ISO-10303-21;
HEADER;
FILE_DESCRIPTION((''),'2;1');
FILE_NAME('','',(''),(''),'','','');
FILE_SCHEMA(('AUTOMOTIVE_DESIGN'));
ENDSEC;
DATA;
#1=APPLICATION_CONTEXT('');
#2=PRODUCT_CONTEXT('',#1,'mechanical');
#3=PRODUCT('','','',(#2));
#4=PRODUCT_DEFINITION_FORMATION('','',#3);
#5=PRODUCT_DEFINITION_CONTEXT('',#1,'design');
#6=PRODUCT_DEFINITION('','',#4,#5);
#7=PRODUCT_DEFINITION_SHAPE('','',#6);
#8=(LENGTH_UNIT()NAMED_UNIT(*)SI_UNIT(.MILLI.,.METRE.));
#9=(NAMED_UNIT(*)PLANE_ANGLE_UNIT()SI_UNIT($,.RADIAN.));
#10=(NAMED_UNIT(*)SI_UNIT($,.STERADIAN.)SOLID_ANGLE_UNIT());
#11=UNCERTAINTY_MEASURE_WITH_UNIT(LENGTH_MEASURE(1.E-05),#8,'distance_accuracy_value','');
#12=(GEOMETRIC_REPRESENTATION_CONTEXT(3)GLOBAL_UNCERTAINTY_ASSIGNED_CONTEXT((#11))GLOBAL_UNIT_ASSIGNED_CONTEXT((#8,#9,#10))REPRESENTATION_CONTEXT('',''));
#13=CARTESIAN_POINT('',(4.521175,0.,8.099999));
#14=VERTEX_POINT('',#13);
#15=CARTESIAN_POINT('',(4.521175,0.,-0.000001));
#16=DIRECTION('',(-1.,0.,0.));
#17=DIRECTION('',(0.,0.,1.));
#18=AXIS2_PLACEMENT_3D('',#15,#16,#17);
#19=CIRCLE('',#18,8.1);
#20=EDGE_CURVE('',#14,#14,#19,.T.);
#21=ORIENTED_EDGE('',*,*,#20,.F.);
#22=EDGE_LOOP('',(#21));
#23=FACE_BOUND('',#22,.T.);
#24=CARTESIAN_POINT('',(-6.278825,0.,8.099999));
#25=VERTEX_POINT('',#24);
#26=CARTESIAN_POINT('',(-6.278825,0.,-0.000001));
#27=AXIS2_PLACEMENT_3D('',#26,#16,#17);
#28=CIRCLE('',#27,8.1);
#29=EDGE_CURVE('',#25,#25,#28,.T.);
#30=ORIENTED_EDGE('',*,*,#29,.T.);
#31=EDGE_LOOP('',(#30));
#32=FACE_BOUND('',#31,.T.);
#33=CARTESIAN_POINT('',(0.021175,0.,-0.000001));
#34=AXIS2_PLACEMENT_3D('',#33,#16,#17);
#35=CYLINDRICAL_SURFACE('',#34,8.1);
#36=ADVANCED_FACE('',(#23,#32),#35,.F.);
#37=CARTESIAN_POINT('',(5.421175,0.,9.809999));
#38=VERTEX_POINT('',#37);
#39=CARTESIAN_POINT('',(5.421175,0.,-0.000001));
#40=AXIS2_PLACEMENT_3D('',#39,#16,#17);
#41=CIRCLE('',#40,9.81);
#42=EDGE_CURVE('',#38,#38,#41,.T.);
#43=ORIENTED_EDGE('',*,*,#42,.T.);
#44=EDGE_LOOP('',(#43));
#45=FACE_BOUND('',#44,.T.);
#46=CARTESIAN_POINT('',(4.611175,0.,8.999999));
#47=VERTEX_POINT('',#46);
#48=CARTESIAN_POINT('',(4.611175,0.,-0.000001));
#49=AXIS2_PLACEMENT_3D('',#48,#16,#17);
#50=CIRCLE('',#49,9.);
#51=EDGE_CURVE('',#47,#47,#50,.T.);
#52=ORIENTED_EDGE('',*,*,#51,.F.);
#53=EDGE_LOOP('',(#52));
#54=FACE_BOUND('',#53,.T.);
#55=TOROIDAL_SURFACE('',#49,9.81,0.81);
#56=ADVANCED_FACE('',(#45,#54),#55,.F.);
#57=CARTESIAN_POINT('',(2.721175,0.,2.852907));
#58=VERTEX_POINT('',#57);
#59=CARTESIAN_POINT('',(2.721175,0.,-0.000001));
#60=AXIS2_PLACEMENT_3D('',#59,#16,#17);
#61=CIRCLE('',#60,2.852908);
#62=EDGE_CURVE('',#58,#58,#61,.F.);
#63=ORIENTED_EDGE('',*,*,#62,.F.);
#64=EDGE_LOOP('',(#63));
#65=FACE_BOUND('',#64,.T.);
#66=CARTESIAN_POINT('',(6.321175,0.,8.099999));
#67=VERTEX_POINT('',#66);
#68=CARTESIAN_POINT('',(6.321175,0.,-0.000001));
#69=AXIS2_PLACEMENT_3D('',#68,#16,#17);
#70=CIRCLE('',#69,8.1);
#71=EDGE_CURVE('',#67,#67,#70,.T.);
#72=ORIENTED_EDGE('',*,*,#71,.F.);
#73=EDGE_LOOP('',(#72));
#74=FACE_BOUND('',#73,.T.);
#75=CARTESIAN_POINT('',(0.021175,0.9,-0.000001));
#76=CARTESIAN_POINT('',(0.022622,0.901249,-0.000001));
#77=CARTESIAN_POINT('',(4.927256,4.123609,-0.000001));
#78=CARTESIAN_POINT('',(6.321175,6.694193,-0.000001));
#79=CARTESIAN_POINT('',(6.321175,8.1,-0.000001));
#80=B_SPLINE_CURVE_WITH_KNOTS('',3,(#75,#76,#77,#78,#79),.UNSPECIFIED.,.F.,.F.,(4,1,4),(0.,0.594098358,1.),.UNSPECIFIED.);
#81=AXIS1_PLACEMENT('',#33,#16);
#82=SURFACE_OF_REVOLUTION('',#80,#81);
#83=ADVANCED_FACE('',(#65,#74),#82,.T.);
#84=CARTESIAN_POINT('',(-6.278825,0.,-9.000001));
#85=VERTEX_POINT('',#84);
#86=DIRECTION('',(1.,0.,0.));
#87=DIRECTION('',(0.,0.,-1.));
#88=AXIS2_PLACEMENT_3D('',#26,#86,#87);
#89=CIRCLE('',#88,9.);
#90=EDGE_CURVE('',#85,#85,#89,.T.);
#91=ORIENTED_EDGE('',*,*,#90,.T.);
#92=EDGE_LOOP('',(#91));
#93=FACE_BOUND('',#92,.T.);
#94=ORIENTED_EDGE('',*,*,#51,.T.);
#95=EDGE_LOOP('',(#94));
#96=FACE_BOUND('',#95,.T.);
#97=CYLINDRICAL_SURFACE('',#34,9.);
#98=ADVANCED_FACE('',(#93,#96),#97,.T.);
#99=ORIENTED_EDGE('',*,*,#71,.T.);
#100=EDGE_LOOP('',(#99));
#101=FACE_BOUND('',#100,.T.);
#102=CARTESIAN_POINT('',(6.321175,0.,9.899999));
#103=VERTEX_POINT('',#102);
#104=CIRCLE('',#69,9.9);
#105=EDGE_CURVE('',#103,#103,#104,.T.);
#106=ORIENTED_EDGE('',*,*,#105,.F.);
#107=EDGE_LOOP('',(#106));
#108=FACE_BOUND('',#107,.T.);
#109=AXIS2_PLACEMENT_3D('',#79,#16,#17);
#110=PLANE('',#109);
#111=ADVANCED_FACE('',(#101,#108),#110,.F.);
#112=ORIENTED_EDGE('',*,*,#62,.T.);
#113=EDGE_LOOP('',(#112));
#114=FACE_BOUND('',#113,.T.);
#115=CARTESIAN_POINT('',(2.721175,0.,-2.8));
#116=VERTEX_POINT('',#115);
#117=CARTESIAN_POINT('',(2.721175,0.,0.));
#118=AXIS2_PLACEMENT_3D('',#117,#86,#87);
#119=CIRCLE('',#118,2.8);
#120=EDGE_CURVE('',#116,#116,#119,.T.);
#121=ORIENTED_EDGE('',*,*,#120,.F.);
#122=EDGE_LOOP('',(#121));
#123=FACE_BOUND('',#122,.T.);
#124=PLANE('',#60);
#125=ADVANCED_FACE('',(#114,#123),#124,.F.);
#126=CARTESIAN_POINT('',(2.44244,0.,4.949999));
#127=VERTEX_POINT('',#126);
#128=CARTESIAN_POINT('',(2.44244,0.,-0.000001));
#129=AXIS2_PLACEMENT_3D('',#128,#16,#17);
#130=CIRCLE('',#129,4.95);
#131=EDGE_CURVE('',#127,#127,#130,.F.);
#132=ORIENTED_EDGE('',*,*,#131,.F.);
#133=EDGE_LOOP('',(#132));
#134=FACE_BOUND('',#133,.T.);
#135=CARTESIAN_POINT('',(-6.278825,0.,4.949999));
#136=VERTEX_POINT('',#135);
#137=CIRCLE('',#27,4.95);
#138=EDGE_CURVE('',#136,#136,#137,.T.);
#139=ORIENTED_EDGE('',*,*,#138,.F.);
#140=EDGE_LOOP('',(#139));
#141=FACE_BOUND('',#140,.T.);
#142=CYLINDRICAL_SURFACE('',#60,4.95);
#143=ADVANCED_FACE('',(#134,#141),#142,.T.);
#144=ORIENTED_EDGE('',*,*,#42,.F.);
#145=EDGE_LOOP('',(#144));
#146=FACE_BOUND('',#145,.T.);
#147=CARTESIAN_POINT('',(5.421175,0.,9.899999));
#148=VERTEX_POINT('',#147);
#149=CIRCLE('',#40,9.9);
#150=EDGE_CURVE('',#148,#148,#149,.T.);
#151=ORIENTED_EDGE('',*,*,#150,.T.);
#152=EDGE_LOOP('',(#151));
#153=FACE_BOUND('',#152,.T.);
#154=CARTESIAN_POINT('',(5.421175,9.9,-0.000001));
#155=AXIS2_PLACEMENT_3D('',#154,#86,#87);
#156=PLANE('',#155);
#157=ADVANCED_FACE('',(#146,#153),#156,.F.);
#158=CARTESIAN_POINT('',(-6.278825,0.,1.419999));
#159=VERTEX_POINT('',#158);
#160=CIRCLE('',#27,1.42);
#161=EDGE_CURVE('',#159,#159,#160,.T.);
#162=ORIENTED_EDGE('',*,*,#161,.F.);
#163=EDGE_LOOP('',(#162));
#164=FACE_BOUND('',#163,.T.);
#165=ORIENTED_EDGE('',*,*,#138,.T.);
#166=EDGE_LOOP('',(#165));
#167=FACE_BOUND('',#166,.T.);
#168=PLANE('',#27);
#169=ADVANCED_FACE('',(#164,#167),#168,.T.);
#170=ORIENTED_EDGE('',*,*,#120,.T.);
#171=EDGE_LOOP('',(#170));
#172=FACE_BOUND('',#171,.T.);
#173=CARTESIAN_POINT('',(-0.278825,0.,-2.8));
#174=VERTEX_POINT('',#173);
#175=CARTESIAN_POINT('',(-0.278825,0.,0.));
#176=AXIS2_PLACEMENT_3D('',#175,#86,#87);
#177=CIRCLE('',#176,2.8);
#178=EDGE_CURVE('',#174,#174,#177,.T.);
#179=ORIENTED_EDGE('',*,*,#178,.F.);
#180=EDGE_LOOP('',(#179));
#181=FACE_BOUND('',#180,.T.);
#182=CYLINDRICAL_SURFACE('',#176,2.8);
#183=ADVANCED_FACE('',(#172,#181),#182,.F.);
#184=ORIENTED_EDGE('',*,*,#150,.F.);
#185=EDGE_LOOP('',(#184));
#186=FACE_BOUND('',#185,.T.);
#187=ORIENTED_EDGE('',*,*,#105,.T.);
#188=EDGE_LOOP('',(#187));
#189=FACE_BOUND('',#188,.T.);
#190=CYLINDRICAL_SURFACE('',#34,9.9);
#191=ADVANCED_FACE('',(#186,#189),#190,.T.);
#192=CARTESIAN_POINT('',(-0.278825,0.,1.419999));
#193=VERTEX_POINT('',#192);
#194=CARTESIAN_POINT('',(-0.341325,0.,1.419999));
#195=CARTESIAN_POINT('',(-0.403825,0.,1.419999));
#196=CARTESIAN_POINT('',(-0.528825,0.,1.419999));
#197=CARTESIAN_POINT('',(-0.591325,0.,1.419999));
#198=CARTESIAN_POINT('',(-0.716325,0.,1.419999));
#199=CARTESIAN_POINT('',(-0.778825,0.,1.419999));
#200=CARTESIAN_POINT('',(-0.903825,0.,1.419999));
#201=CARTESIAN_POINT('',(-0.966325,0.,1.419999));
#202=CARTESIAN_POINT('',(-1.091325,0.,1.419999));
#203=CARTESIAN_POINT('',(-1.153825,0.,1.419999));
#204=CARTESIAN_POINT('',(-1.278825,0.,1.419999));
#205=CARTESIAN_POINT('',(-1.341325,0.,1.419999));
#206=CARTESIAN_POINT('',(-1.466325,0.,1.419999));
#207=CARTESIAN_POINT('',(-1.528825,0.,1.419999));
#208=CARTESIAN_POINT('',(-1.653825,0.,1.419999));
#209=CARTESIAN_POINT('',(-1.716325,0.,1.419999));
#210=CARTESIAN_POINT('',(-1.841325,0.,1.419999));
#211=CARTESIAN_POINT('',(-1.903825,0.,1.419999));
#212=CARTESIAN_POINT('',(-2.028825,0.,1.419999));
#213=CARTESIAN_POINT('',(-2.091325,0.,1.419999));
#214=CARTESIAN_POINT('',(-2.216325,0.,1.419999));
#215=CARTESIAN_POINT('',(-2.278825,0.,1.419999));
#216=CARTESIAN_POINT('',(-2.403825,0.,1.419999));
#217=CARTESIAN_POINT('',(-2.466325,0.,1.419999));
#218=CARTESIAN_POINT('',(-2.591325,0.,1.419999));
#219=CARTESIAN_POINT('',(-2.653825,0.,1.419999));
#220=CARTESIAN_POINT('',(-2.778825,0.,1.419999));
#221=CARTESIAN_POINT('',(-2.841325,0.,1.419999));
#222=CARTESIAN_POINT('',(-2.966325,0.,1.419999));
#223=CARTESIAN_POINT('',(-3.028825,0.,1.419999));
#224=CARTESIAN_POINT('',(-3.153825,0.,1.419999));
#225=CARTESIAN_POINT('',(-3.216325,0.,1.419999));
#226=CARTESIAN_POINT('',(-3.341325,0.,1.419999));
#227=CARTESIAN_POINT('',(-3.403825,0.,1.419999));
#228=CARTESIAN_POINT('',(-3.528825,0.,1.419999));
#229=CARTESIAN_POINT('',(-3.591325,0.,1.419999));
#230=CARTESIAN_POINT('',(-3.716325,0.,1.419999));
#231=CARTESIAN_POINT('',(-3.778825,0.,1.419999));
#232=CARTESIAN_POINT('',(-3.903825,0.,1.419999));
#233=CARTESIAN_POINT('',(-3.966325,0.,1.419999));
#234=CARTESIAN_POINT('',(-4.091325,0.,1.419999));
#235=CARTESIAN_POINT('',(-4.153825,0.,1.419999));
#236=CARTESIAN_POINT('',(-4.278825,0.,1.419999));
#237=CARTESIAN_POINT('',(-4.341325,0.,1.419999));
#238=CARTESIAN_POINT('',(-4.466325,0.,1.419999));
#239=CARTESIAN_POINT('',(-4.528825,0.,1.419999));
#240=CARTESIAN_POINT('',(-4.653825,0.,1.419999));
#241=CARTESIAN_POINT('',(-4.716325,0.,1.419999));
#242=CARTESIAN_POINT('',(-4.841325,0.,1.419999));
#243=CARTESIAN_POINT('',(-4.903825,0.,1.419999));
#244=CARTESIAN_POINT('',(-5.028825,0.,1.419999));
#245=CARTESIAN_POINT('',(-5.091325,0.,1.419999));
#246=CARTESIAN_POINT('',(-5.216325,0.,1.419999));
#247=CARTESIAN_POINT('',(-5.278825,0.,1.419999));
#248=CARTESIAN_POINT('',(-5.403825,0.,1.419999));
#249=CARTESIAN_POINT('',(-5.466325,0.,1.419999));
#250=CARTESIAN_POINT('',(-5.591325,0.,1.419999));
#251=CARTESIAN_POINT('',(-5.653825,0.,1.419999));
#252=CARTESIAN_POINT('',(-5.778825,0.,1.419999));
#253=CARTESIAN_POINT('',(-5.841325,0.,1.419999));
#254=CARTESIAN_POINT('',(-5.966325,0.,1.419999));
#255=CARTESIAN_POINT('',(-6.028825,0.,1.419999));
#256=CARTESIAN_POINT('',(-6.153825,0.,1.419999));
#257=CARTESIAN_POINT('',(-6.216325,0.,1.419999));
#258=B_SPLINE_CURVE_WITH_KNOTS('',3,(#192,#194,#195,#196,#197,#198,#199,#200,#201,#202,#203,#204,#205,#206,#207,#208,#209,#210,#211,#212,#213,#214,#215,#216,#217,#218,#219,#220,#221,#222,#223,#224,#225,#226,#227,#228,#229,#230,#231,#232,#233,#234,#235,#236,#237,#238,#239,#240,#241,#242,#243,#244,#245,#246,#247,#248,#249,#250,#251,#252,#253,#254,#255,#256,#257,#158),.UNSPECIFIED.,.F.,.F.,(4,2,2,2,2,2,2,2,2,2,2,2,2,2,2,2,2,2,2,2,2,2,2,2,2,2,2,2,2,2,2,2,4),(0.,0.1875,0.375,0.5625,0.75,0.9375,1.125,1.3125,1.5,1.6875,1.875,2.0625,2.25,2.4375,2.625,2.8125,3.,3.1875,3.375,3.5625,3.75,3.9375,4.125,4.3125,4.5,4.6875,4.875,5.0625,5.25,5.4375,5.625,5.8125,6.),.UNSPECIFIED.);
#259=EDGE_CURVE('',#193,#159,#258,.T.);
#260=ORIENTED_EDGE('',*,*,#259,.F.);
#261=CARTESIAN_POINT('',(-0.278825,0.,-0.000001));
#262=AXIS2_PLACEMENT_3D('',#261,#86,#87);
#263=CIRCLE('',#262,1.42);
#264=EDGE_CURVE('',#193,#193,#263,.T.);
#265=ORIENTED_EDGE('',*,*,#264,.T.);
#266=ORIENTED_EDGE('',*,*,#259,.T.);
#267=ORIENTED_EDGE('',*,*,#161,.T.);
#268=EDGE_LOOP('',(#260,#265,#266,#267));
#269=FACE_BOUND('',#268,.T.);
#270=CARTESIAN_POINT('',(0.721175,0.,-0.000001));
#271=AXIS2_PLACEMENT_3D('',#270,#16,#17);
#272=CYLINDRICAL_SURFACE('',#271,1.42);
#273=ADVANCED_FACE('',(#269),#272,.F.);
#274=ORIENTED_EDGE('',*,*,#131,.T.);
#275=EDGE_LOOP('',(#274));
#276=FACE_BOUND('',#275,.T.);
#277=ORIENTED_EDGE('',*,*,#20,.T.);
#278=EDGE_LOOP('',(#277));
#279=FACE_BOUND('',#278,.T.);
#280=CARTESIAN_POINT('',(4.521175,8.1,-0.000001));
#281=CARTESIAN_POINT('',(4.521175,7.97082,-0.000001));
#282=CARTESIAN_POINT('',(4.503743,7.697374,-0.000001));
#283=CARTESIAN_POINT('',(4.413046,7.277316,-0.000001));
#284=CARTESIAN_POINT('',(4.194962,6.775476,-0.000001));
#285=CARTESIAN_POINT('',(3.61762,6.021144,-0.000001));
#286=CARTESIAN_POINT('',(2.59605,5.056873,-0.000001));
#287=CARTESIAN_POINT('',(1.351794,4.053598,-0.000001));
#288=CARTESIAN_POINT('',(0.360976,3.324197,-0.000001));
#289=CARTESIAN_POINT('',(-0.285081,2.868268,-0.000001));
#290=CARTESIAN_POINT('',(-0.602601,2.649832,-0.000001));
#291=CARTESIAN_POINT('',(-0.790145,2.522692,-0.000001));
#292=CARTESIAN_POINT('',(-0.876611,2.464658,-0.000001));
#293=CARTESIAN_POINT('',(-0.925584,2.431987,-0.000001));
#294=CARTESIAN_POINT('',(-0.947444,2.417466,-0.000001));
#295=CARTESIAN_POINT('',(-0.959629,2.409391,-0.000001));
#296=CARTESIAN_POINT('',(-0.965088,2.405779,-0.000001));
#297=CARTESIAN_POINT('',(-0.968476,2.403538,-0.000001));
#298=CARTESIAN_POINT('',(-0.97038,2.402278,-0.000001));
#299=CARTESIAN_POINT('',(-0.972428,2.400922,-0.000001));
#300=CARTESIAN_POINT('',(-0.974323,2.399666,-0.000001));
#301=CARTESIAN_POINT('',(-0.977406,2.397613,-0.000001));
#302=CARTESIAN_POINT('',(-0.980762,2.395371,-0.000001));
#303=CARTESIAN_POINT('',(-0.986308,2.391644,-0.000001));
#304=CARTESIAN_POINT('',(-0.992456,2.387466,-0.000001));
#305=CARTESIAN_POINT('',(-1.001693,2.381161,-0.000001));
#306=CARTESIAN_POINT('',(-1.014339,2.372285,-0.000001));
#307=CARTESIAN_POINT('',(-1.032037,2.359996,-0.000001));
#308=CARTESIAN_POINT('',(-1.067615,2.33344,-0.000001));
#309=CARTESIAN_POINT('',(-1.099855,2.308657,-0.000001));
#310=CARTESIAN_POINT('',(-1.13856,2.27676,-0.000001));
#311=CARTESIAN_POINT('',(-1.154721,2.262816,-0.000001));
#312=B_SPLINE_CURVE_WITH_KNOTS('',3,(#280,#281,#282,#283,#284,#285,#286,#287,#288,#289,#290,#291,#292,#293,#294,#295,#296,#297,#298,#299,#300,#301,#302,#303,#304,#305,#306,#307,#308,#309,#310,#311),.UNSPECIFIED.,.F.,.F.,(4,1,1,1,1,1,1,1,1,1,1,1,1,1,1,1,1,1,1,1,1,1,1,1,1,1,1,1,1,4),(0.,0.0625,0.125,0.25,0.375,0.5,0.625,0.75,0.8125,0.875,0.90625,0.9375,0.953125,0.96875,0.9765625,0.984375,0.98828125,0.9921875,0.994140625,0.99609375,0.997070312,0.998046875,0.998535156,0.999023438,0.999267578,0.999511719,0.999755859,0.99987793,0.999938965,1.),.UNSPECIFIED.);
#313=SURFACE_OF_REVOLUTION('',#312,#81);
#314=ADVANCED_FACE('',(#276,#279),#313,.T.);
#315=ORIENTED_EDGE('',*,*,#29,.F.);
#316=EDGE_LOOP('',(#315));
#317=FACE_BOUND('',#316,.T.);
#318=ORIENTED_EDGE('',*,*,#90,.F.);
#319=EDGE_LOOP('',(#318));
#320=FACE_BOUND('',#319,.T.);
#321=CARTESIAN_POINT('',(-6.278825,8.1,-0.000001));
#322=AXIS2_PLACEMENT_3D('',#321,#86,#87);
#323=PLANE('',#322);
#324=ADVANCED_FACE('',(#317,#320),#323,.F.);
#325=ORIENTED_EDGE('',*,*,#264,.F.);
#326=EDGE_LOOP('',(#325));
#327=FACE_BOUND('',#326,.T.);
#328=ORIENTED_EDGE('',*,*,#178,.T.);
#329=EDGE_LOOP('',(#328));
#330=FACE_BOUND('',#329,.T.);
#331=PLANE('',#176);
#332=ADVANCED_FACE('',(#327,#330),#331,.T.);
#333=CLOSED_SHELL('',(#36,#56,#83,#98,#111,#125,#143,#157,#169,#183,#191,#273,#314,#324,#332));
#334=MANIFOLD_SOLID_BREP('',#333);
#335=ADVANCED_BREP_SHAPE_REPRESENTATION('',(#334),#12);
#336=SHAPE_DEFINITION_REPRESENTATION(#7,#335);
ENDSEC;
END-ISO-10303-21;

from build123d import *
from OCP.BRepAlgoAPI import BRepAlgoAPI_Cut
from OCP.TopTools import TopTools_ListOfShape

# Parameters (mm, degrees)
SKETCH2_R           = 5.5
SKETCH2_R_2         = 1
BOSS_EXTRUDE1_DEPTH = 10
SCALE1_SCALE        = 0.9
SKETCH3_R           = 2.8
CUT_EXTRUDE1_DEPTH  = 3
SKETCH4_R           = 1.42
CUT_EXTRUDE2_DEPTH  = 7
SKETCH6_R           = 12.614646558
SKETCH6_R_2         = 9
CUT_EXTRUDE3_DEPTH  = 10


with BuildPart() as part:
    # Sketch1 → Revolve1 (revolve)
    with BuildSketch(Plane.XY):
        with BuildLine():
            Line((-7, 9), (5, 9))
            add(Edge.make_bspline(
                [(5, 9), (5, 8.856466181), (4.980630385, 8.552638111), (4.879856885, 8.085906437), (4.637540593, 7.528306389), (3.996049584, 6.69016035), (2.86097235, 5.618747783), (1.478465211, 4.503997435), (0.514957064, 3.794701588), (0.068439653, 3.476275963), (0, 3.427716912)],
                knots=[0, 0, 0, 0, 0.0625, 0.125, 0.25, 0.375, 0.5, 0.625, 0.75, 0.773497894, 0.773497894, 0.773497894, 0.773497894], degree=3))
            Line((0, 3.427716912), (0, 1))
            add(Edge.make_bspline(
                [(7, 9), (7, 7.437991686), (5.451200792, 4.581787455), (0.00160793, 1.001387392), (0, 1)],
                knots=[0, 0, 0, 0, 0.405901642, 1, 1, 1, 1], degree=3))
            Line((7, 9), (7, 11))
            Line((7, 11), (6, 11))
            Line((6, 11), (6, 10.9))
            ThreePointArc((6, 10.9), (5.736396103, 10.263603897), (5.1, 10))
            Line((5.1, 10), (-5.1, 10))
            ThreePointArc((-5.1, 10), (-5.736396103, 10.263603897), (-6, 10.9))
            Line((-6, 10.9), (-6, 11))
            Line((-6, 11), (-7, 11))
            Line((-7, 11), (-7, 9))
        make_face()
    revolve(axis=Axis((0, 0, 0), (1, 0, 0)))

    # Sketch2 → Boss-Extrude1 (add)
    with BuildSketch(Plane.ZY.offset(7)):
        Circle(SKETCH2_R)
        Circle(SKETCH2_R_2, mode=Mode.SUBTRACT)
    extrude(amount=-BOSS_EXTRUDE1_DEPTH)


with BuildPart() as part_1:
    # Scale1: scaled about (0.211743453, 1.2736e-05, 1.291e-06)
    add(part.part.scale(SCALE1_SCALE).moved(Location((0.021174345, 1.274e-06, 1.29e-07))))

    # Sketch3 → Cut-Extrude1 (cut)
    with BuildSketch(Plane(origin=(2.721175281, 0, 0), x_dir=(0, 0, -1), z_dir=(1, 0, 0))):
        Circle(SKETCH3_R)
    extrude(amount=-CUT_EXTRUDE1_DEPTH, mode=Mode.SUBTRACT)


with BuildPart() as cut_extrude2_tool:
    # Sketch4 → Cut-Extrude2 (new body)
    with BuildSketch(Plane.ZY.offset(6.278824719)):
        with Locations((-8.53e-07, 0)):
            Circle(SKETCH4_R)
    extrude(amount=-CUT_EXTRUDE2_DEPTH)


with BuildPart() as part_2:
    add(part_1.part)

    # Cut-Extrude2: cut by cut_extrude2_tool, with a tolerance
    cut_extrude2_stock = TopTools_ListOfShape()
    cut_extrude2_stock.Append(part_2.part.wrapped)
    cut_extrude2_tools = TopTools_ListOfShape()
    cut_extrude2_tools.Append(cut_extrude2_tool.part.wrapped)
    cut_extrude2_cut = BRepAlgoAPI_Cut()
    cut_extrude2_cut.SetArguments(cut_extrude2_stock)
    cut_extrude2_cut.SetTools(cut_extrude2_tools)
    cut_extrude2_cut.SetFuzzyValue(0.00001)
    cut_extrude2_cut.Build()
    add(Compound.cast(cut_extrude2_cut.Shape()).solids(), mode=Mode.REPLACE)


with BuildPart() as cut_extrude3_tool:
    # Sketch6 → Cut-Extrude3 (new body)
    with BuildSketch(Plane(origin=(0, 0, 0), x_dir=(0, 0, -1), z_dir=(1, 0, 0))):
        with Locations((8.53e-07, 0)):
            Circle(SKETCH6_R)
        with Locations((8.53e-07, 0)):
            Circle(SKETCH6_R_2, mode=Mode.SUBTRACT)
    extrude(amount=-CUT_EXTRUDE3_DEPTH)


with BuildPart() as part_3:
    add(part_2.part)

    # Cut-Extrude3: cut by cut_extrude3_tool, with a tolerance
    cut_extrude3_stock = TopTools_ListOfShape()
    cut_extrude3_stock.Append(part_3.part.wrapped)
    cut_extrude3_tools = TopTools_ListOfShape()
    cut_extrude3_tools.Append(cut_extrude3_tool.part.wrapped)
    cut_extrude3_cut = BRepAlgoAPI_Cut()
    cut_extrude3_cut.SetArguments(cut_extrude3_stock)
    cut_extrude3_cut.SetTools(cut_extrude3_tools)
    cut_extrude3_cut.SetFuzzyValue(0.00001)
    cut_extrude3_cut.Build()
    add(Compound.cast(cut_extrude3_cut.Shape()).solids(), mode=Mode.REPLACE)


solid = part_3.part
